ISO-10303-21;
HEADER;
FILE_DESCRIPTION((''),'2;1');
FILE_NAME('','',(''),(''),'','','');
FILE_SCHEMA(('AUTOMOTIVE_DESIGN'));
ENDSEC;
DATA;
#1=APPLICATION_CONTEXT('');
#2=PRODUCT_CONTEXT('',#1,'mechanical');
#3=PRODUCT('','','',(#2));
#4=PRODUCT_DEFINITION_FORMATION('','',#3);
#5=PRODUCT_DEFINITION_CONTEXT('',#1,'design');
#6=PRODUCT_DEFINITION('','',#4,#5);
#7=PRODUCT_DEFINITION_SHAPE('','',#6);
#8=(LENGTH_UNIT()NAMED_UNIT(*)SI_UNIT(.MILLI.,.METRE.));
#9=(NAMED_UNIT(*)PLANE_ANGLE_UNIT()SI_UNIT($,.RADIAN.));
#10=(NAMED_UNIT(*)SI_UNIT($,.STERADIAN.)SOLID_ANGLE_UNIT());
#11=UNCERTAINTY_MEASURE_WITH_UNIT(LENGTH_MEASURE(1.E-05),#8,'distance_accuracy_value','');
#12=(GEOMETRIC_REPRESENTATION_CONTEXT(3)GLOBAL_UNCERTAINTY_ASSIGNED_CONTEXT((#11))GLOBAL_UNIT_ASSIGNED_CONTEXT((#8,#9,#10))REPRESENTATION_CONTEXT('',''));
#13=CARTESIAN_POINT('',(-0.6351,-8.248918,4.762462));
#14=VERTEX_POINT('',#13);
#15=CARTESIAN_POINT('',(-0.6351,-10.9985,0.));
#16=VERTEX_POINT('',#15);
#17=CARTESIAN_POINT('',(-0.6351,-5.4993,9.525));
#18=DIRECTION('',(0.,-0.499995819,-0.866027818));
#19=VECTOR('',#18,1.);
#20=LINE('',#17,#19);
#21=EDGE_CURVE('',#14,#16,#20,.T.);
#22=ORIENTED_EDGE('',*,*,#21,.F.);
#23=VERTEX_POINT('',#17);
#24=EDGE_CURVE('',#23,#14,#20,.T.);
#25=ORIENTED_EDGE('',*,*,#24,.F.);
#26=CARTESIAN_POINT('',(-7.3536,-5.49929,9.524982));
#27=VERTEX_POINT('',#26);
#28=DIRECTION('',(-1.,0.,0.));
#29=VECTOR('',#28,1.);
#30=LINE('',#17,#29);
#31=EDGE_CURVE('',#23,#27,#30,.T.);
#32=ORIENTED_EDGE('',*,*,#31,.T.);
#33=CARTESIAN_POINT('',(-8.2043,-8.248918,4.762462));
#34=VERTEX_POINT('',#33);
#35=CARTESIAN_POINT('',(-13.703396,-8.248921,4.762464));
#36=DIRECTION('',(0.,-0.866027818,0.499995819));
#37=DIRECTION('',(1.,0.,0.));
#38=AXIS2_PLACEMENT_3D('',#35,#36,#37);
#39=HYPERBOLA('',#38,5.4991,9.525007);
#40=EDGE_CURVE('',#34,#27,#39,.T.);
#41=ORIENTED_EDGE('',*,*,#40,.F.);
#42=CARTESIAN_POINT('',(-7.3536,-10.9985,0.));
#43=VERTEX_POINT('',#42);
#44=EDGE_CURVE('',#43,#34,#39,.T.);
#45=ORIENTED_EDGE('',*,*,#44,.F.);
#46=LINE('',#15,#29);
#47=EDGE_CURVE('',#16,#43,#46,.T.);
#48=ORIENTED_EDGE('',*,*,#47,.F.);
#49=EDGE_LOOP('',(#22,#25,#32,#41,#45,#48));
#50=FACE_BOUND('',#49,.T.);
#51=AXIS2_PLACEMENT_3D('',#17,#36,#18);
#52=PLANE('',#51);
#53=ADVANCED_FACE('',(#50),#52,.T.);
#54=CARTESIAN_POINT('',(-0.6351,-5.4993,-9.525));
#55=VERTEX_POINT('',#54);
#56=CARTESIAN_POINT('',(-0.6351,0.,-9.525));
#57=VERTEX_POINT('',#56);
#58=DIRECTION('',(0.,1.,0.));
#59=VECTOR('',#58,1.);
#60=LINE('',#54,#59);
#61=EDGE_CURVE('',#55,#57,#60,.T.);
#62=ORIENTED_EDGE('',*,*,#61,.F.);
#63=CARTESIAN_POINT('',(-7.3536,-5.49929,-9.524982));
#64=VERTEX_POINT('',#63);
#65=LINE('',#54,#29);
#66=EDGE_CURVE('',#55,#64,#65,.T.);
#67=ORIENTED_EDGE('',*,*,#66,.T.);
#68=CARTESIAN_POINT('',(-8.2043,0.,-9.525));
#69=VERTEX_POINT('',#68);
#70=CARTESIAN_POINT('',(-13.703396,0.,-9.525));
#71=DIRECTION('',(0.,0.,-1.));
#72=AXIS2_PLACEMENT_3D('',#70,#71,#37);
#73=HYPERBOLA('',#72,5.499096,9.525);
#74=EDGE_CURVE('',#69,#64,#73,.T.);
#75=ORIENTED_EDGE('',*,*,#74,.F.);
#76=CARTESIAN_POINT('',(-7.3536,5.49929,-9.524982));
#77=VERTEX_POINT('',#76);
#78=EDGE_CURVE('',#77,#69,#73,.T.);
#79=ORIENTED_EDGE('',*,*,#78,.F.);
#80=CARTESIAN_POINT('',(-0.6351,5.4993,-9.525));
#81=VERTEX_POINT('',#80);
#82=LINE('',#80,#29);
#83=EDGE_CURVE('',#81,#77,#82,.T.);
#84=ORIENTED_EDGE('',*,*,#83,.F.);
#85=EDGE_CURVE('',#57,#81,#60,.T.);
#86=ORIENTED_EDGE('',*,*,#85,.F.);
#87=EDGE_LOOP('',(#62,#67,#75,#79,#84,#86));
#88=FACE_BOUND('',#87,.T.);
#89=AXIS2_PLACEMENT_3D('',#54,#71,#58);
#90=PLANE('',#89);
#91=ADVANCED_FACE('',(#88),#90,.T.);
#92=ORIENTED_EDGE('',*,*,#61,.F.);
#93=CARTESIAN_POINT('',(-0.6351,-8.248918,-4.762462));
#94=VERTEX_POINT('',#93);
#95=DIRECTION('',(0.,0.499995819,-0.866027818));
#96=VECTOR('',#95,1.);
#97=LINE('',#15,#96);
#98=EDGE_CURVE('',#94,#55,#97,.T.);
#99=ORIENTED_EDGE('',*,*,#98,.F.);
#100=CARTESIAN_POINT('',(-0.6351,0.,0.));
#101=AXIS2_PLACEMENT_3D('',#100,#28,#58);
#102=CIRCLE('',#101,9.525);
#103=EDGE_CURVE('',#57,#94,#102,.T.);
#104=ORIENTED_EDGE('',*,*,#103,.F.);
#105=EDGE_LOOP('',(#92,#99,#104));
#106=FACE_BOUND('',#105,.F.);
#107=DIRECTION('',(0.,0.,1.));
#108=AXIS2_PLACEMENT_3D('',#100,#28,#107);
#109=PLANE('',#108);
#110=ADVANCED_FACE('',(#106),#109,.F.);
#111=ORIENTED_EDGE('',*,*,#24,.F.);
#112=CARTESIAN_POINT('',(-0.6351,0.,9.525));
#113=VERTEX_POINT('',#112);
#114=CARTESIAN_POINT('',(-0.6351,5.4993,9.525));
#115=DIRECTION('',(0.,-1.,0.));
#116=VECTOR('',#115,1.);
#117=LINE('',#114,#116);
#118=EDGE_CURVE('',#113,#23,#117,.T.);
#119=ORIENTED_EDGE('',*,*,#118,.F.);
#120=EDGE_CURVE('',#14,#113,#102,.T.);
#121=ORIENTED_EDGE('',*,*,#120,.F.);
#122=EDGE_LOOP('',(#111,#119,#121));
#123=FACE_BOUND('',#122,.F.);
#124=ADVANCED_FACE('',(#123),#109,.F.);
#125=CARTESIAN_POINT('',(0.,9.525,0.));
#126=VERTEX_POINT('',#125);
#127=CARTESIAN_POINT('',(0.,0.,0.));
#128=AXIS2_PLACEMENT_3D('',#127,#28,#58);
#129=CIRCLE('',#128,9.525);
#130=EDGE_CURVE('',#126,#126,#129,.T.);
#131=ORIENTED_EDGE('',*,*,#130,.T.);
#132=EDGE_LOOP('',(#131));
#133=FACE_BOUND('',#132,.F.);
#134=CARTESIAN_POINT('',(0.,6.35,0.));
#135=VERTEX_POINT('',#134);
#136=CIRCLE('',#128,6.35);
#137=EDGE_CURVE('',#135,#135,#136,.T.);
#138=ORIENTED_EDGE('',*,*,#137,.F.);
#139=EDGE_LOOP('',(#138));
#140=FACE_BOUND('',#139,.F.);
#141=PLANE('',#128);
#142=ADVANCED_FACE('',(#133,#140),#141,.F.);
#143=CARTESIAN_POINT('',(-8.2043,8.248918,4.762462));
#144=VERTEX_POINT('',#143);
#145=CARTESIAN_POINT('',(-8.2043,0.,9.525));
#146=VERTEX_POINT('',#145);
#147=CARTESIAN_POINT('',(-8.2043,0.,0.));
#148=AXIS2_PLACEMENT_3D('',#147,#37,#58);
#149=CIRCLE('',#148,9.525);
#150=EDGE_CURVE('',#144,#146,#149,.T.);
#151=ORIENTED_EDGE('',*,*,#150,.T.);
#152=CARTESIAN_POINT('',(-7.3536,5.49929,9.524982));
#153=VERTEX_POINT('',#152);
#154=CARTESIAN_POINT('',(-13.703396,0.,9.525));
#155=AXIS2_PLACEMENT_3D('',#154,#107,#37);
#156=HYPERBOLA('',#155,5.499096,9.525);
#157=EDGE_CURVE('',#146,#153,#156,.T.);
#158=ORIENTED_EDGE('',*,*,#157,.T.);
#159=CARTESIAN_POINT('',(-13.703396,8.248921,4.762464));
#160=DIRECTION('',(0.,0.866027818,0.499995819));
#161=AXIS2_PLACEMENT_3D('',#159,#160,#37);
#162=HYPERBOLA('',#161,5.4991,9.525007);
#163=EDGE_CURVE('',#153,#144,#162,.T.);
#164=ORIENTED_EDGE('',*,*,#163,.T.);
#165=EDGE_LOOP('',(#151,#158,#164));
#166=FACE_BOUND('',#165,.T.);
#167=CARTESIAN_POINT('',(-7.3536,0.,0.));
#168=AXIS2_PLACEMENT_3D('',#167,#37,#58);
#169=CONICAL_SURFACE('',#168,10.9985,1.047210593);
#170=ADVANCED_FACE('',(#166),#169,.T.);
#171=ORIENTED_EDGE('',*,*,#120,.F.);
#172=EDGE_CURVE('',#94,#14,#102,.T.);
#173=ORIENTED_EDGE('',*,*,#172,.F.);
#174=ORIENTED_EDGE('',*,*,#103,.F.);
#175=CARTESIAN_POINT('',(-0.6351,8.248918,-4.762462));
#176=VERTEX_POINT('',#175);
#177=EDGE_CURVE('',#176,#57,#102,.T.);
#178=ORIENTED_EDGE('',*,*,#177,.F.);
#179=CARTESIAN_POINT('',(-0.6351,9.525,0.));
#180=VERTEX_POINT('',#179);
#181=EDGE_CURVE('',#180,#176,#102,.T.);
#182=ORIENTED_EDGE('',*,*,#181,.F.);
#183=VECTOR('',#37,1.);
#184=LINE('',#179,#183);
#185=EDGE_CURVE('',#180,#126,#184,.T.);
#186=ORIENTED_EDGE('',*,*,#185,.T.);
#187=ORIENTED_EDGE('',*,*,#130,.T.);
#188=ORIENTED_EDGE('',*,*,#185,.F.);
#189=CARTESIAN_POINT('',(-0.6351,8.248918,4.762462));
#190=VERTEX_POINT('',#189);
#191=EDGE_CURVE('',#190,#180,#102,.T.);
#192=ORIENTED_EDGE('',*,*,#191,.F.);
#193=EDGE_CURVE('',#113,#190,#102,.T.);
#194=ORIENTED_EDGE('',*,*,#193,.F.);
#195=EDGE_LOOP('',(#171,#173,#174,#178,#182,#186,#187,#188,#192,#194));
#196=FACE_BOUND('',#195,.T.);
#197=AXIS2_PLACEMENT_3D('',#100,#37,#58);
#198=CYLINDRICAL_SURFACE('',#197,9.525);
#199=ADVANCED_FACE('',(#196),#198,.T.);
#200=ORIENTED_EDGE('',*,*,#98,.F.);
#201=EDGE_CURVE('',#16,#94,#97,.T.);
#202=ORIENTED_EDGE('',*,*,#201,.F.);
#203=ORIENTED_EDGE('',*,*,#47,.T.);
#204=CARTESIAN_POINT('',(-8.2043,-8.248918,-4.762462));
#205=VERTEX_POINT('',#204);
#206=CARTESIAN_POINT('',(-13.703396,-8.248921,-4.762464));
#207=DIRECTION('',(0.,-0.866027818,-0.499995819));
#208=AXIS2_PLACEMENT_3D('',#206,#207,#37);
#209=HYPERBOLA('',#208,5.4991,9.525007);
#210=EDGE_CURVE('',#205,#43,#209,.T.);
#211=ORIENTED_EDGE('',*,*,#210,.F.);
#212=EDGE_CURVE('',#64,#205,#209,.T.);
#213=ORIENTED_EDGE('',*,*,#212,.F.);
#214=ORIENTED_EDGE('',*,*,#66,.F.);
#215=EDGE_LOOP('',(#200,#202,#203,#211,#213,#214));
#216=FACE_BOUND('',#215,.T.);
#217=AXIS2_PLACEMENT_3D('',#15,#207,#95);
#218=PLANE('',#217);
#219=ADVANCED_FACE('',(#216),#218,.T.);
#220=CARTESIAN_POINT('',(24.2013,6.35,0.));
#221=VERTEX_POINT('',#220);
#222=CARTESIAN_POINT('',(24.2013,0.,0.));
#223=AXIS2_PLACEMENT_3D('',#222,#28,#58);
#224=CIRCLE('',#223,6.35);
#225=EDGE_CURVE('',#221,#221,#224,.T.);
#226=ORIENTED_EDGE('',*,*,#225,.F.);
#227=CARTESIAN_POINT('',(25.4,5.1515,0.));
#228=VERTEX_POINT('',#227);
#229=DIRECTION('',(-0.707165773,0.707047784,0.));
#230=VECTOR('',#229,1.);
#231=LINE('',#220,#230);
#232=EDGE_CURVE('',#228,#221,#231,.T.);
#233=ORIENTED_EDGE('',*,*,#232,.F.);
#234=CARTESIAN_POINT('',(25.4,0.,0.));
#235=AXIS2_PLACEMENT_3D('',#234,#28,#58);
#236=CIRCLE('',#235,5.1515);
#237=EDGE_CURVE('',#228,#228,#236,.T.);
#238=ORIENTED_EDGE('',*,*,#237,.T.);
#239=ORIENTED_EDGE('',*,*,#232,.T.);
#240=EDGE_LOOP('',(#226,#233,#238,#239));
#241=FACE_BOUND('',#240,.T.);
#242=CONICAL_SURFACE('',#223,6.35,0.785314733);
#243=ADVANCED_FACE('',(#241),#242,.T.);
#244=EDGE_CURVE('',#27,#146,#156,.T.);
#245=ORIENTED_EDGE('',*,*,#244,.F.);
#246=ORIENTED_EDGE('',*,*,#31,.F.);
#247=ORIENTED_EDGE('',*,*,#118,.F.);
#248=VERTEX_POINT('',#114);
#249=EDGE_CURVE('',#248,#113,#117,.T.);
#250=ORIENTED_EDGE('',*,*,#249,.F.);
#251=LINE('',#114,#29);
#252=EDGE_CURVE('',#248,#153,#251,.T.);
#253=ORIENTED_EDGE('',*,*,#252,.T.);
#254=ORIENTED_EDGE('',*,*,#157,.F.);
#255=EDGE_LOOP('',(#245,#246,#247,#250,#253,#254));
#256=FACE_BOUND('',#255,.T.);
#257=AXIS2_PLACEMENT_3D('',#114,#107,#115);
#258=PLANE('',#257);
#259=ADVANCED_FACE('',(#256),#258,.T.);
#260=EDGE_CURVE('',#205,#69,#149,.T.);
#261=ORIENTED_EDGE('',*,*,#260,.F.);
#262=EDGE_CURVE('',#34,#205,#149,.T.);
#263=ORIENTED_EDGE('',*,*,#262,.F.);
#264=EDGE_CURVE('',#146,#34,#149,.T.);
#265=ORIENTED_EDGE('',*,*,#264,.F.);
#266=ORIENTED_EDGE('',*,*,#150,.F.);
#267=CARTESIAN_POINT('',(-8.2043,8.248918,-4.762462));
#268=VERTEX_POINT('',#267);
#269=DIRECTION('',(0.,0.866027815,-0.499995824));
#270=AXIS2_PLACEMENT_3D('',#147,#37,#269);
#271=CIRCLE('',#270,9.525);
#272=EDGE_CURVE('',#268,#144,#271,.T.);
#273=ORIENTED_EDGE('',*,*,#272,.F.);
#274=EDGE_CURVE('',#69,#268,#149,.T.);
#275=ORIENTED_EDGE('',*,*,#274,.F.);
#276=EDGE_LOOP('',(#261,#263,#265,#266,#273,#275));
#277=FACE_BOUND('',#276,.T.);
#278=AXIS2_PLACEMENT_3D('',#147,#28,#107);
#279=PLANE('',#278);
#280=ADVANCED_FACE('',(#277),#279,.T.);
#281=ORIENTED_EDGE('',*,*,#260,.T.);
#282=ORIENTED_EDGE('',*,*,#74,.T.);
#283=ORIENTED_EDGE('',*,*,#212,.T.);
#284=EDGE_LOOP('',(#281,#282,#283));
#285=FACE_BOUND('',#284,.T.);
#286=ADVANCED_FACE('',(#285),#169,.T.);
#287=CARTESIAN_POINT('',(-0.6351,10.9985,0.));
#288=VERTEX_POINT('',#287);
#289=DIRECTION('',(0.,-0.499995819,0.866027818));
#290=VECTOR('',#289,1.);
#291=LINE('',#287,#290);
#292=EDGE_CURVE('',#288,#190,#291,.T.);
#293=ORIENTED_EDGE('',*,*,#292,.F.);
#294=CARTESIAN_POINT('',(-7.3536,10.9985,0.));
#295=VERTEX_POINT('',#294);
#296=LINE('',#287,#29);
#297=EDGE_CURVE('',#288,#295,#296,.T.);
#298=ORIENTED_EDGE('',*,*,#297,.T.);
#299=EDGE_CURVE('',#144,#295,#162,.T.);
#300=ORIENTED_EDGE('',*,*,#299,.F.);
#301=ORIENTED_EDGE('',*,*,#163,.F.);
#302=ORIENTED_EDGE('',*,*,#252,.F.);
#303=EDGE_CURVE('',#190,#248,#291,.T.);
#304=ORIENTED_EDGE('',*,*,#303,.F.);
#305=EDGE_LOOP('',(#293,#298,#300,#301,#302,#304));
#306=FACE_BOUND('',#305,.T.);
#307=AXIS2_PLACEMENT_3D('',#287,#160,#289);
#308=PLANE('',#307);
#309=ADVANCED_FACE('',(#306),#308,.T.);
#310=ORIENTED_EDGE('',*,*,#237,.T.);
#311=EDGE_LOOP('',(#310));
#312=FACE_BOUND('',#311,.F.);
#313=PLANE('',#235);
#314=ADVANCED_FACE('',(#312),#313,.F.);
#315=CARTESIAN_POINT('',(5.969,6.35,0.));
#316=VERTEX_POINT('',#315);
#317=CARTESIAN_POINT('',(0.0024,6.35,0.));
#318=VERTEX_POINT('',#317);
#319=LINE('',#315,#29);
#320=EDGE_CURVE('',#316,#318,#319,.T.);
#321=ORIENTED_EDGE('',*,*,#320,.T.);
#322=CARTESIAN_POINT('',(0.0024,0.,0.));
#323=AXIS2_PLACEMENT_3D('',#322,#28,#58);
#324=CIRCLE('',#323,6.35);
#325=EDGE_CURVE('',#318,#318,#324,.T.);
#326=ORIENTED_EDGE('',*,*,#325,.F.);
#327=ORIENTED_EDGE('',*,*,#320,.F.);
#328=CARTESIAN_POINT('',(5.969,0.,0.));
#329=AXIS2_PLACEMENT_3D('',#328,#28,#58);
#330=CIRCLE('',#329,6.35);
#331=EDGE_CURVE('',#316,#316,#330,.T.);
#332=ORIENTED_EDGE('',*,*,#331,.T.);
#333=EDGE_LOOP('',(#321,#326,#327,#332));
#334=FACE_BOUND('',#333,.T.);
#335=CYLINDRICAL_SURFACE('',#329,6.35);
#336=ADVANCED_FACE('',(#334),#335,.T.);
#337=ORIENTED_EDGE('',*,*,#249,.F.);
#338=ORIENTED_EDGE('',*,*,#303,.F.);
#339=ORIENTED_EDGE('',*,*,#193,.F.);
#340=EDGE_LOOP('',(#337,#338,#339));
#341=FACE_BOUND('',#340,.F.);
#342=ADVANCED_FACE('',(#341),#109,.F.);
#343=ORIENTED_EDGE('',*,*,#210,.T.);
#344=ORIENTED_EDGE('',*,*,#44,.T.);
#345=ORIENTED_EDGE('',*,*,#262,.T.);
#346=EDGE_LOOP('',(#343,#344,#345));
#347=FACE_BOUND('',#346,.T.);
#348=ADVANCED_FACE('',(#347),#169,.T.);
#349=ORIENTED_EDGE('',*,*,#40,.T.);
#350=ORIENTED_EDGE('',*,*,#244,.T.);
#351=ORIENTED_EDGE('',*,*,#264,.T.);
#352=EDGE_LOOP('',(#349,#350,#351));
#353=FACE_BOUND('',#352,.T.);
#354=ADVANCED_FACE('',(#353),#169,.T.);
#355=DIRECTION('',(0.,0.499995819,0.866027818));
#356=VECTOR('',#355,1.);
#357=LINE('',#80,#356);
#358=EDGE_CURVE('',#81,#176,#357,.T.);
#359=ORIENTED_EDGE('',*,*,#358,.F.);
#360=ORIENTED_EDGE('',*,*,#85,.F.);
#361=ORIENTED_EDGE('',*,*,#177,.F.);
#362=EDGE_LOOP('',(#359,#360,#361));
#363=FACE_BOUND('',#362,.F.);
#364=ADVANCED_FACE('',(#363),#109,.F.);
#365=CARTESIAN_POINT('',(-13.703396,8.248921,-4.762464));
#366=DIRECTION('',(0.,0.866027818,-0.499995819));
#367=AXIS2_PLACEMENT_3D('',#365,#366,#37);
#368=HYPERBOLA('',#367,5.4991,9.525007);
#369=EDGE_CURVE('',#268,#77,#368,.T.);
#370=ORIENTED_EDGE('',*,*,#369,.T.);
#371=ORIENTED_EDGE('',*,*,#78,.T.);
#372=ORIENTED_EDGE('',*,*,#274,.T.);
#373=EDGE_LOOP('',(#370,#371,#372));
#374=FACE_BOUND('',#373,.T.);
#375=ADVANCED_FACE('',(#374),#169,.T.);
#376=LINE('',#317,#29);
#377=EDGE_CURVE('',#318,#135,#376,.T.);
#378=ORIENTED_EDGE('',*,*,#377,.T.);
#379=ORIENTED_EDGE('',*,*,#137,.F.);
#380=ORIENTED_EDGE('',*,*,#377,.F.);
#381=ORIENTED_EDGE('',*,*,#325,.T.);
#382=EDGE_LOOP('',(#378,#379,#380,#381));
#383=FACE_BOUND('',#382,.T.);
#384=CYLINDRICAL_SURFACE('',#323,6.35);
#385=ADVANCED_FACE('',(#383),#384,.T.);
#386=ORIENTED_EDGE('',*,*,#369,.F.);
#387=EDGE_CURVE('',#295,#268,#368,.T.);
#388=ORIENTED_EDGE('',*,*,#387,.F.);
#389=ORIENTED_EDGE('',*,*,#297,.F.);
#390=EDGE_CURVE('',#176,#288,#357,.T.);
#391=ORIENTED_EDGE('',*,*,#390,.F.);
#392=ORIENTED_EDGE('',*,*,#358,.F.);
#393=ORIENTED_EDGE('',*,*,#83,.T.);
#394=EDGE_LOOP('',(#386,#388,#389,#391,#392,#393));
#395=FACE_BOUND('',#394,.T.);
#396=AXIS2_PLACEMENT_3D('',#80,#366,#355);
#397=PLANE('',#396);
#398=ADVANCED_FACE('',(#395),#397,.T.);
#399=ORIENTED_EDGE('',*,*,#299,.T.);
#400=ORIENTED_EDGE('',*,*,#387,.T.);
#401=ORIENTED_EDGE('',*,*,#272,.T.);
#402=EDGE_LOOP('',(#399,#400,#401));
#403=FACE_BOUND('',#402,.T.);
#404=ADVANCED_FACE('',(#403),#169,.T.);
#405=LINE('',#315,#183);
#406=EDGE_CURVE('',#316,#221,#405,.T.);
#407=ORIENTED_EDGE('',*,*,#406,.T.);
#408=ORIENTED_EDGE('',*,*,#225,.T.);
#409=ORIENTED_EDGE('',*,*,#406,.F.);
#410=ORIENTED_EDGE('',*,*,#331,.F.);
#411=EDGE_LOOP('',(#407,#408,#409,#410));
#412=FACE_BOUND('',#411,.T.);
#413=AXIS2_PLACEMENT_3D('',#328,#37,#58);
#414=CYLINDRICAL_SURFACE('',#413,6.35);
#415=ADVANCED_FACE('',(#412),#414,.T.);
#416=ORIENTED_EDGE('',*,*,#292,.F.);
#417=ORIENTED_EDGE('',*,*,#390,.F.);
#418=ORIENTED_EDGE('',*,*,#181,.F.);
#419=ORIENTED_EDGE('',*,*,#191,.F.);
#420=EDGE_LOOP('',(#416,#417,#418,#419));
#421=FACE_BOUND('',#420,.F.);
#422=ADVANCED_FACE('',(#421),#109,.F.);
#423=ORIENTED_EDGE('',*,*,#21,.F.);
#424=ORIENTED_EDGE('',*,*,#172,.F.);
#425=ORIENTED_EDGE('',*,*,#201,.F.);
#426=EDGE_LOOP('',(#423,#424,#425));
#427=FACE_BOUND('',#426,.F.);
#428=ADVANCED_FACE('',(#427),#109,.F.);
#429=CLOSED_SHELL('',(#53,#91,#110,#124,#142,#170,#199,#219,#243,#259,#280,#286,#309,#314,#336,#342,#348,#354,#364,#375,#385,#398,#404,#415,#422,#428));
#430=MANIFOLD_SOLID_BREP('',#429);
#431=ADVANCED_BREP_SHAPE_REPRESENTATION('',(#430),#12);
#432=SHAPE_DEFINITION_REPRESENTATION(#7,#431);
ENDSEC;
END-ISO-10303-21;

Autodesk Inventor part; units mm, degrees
ref_plane "YZ Plane" through (0, 0, 0) normal (1, 0, 0) x (0, 1, 0)
ref_plane "XZ Plane" through (0, 0, 0) normal (0, 1, 0) x (-1, 0, 0)
sketch "Sketch1" plane through (0, 0, 0) normal (0, 0, 1) x (1, 0, 0)
  line L0 (0, 9.525) -> (0, 6.35)
  line L1 (5.969, 6.35) -> (25.4, 6.35)
  line L2 (25.4, 6.35) -> (25.4, 0)
  line L3 (25.4, 0) -> (-0.6351, 0)
  line L4 (-5.8421, 0) -> (30.607, 0) projected
  line L5 (-0.6351, 0) -> (-0.6351, 9.525)
  line L6 (-0.6351, 9.525) -> (0, 9.525)
  line L7 (5.969, 6.35) -> (0.0024, 6.35)
  line L8 (0.0024, 6.35) -> (0, 6.35)
  line L9 (0, -1.905) -> (0, 11.43) projected
  dimension "d0" = 25.4
  dimension "d1" = 19.431
  dimension "d2" = 12.7
  dimension "d9" = 0.6351
  dimension "d10" = 19.05
  dimension "d13" = 5.9666
  dimension "d14" = 12.7
revolve "Body" add sketch "Sketch1" angle 360 about axis through (25.4, 0, 0) along (-1, 0, 0)
sketch "Sketch2" plane through (-0.6351, 0, 0) normal (-1, 0, 0) x (0, 0, 1)
  line L0 (0, 10.9985) -> (9.525, 5.4993)
  line L1 (9.525, 5.4993) -> (9.525, -5.4993)
  line L2 (9.525, -5.4993) -> (0, -10.9985)
  line L3 (0, -10.9985) -> (-9.525, -5.4993)
  line L4 (-9.525, -5.4993) -> (-9.525, 5.4993)
  line L5 (-9.525, 5.4993) -> (0, 10.9985)
  point P0 (0, 0)
  point P1 (0, 0)
  dimension "d11" = 19.05
extrude "Head" add sketch "Sketch2" along normal blind 7.5692
sketch "Sketch4" plane through (0, 0, 0) normal (0, 0, 1) x (1, 0, 0)
  line L0 (-8.2043, 9.525) -> (-8.2043, 10.9985)
  line L1 (-8.2043, 10.9985) -> (-7.3536, 10.9985)
  line L2 (-7.3536, 10.9985) -> (-8.2043, 9.525)
  line L3 (-9.7181, 0) -> (0.8787, 0) projected
  line L4 (-0.6351, 10.9985) -> (-8.2043, 10.9985) projected
  line L5 (-8.2043, 5.4993) -> (-8.2043, 10.9985) projected
  dimension "d5" = 30
  dimension "d19" = 19.05
revolve "Chamfer1" cut sketch "Sketch4" angle 360 about axis through (-10, 0, 0) along (1, 0, 0)
thread "Thread" size "1/2-13 UNC" class "2A" standard "ANSI Unified Screw Threads" length 19.431
chamfer "Chamfer2" distance 1.1985 distance2 1.1987 1 edges at (25.4, -6.35, 0) measured on face at (25.4, -1.4034, 0.0866)
ref_plane "Work Plane1" through (1.525, 0, 0) normal (0, 0, 1) x (1, 0, 0)
equation "\"d0\" = NLG"
equation "\"d1\" = GEL"
equation "\"d2\" = GD"
equation "\"d10\" = SD2"
equation "\"d14\" = BDM"
equation "\"d11\" = SW"
equation "\"d3\" = KOH - SD"
equation "\"d5\" = ANG1"
equation "\"d19\" = SW0"
equation "\"d15\" = GEL"
equation "\"d6\" = -0.5 * SPD + 0.5 * GD"
equation "\"NLG\" = 25.4"
equation "\"GD\" = 12.7"
equation "\"BDM\" = 12.7"
equation "\"KOH\" = 8.2042"
equation "\"GEL\" = 19.431"
equation "\"SW\" = 19.05"
equation "\"SW0\" = SW"
equation "\"SPD\" = GD1"
equation "\"SD2\" = SW"
equation "\"SD\" = 0.635"
equation "\"ANG1\" = 30deg"
equation "\"GAL\" = 5.96646"
equation "\"GUL\" = 1.19863"
equation "\"RR\" = 0.381"
equation "\"WFT\" = SD"
equation "\"GD1\" = 10.303"
equation "\"THREADDIA\" = 12.7"
equation "\"SDH\" = SW"
equation "\"SDHG\" = 0.00254"
equation "\"TOA\" = 30deg"
equation "\"FAWI\" = 45deg"
equation "\"NND\" = 12.7"
equation "\"E0\" = 22.00275"
properties part number "AS 2465 - 1/2 x 1  UNC" material "Steel, Mild"
